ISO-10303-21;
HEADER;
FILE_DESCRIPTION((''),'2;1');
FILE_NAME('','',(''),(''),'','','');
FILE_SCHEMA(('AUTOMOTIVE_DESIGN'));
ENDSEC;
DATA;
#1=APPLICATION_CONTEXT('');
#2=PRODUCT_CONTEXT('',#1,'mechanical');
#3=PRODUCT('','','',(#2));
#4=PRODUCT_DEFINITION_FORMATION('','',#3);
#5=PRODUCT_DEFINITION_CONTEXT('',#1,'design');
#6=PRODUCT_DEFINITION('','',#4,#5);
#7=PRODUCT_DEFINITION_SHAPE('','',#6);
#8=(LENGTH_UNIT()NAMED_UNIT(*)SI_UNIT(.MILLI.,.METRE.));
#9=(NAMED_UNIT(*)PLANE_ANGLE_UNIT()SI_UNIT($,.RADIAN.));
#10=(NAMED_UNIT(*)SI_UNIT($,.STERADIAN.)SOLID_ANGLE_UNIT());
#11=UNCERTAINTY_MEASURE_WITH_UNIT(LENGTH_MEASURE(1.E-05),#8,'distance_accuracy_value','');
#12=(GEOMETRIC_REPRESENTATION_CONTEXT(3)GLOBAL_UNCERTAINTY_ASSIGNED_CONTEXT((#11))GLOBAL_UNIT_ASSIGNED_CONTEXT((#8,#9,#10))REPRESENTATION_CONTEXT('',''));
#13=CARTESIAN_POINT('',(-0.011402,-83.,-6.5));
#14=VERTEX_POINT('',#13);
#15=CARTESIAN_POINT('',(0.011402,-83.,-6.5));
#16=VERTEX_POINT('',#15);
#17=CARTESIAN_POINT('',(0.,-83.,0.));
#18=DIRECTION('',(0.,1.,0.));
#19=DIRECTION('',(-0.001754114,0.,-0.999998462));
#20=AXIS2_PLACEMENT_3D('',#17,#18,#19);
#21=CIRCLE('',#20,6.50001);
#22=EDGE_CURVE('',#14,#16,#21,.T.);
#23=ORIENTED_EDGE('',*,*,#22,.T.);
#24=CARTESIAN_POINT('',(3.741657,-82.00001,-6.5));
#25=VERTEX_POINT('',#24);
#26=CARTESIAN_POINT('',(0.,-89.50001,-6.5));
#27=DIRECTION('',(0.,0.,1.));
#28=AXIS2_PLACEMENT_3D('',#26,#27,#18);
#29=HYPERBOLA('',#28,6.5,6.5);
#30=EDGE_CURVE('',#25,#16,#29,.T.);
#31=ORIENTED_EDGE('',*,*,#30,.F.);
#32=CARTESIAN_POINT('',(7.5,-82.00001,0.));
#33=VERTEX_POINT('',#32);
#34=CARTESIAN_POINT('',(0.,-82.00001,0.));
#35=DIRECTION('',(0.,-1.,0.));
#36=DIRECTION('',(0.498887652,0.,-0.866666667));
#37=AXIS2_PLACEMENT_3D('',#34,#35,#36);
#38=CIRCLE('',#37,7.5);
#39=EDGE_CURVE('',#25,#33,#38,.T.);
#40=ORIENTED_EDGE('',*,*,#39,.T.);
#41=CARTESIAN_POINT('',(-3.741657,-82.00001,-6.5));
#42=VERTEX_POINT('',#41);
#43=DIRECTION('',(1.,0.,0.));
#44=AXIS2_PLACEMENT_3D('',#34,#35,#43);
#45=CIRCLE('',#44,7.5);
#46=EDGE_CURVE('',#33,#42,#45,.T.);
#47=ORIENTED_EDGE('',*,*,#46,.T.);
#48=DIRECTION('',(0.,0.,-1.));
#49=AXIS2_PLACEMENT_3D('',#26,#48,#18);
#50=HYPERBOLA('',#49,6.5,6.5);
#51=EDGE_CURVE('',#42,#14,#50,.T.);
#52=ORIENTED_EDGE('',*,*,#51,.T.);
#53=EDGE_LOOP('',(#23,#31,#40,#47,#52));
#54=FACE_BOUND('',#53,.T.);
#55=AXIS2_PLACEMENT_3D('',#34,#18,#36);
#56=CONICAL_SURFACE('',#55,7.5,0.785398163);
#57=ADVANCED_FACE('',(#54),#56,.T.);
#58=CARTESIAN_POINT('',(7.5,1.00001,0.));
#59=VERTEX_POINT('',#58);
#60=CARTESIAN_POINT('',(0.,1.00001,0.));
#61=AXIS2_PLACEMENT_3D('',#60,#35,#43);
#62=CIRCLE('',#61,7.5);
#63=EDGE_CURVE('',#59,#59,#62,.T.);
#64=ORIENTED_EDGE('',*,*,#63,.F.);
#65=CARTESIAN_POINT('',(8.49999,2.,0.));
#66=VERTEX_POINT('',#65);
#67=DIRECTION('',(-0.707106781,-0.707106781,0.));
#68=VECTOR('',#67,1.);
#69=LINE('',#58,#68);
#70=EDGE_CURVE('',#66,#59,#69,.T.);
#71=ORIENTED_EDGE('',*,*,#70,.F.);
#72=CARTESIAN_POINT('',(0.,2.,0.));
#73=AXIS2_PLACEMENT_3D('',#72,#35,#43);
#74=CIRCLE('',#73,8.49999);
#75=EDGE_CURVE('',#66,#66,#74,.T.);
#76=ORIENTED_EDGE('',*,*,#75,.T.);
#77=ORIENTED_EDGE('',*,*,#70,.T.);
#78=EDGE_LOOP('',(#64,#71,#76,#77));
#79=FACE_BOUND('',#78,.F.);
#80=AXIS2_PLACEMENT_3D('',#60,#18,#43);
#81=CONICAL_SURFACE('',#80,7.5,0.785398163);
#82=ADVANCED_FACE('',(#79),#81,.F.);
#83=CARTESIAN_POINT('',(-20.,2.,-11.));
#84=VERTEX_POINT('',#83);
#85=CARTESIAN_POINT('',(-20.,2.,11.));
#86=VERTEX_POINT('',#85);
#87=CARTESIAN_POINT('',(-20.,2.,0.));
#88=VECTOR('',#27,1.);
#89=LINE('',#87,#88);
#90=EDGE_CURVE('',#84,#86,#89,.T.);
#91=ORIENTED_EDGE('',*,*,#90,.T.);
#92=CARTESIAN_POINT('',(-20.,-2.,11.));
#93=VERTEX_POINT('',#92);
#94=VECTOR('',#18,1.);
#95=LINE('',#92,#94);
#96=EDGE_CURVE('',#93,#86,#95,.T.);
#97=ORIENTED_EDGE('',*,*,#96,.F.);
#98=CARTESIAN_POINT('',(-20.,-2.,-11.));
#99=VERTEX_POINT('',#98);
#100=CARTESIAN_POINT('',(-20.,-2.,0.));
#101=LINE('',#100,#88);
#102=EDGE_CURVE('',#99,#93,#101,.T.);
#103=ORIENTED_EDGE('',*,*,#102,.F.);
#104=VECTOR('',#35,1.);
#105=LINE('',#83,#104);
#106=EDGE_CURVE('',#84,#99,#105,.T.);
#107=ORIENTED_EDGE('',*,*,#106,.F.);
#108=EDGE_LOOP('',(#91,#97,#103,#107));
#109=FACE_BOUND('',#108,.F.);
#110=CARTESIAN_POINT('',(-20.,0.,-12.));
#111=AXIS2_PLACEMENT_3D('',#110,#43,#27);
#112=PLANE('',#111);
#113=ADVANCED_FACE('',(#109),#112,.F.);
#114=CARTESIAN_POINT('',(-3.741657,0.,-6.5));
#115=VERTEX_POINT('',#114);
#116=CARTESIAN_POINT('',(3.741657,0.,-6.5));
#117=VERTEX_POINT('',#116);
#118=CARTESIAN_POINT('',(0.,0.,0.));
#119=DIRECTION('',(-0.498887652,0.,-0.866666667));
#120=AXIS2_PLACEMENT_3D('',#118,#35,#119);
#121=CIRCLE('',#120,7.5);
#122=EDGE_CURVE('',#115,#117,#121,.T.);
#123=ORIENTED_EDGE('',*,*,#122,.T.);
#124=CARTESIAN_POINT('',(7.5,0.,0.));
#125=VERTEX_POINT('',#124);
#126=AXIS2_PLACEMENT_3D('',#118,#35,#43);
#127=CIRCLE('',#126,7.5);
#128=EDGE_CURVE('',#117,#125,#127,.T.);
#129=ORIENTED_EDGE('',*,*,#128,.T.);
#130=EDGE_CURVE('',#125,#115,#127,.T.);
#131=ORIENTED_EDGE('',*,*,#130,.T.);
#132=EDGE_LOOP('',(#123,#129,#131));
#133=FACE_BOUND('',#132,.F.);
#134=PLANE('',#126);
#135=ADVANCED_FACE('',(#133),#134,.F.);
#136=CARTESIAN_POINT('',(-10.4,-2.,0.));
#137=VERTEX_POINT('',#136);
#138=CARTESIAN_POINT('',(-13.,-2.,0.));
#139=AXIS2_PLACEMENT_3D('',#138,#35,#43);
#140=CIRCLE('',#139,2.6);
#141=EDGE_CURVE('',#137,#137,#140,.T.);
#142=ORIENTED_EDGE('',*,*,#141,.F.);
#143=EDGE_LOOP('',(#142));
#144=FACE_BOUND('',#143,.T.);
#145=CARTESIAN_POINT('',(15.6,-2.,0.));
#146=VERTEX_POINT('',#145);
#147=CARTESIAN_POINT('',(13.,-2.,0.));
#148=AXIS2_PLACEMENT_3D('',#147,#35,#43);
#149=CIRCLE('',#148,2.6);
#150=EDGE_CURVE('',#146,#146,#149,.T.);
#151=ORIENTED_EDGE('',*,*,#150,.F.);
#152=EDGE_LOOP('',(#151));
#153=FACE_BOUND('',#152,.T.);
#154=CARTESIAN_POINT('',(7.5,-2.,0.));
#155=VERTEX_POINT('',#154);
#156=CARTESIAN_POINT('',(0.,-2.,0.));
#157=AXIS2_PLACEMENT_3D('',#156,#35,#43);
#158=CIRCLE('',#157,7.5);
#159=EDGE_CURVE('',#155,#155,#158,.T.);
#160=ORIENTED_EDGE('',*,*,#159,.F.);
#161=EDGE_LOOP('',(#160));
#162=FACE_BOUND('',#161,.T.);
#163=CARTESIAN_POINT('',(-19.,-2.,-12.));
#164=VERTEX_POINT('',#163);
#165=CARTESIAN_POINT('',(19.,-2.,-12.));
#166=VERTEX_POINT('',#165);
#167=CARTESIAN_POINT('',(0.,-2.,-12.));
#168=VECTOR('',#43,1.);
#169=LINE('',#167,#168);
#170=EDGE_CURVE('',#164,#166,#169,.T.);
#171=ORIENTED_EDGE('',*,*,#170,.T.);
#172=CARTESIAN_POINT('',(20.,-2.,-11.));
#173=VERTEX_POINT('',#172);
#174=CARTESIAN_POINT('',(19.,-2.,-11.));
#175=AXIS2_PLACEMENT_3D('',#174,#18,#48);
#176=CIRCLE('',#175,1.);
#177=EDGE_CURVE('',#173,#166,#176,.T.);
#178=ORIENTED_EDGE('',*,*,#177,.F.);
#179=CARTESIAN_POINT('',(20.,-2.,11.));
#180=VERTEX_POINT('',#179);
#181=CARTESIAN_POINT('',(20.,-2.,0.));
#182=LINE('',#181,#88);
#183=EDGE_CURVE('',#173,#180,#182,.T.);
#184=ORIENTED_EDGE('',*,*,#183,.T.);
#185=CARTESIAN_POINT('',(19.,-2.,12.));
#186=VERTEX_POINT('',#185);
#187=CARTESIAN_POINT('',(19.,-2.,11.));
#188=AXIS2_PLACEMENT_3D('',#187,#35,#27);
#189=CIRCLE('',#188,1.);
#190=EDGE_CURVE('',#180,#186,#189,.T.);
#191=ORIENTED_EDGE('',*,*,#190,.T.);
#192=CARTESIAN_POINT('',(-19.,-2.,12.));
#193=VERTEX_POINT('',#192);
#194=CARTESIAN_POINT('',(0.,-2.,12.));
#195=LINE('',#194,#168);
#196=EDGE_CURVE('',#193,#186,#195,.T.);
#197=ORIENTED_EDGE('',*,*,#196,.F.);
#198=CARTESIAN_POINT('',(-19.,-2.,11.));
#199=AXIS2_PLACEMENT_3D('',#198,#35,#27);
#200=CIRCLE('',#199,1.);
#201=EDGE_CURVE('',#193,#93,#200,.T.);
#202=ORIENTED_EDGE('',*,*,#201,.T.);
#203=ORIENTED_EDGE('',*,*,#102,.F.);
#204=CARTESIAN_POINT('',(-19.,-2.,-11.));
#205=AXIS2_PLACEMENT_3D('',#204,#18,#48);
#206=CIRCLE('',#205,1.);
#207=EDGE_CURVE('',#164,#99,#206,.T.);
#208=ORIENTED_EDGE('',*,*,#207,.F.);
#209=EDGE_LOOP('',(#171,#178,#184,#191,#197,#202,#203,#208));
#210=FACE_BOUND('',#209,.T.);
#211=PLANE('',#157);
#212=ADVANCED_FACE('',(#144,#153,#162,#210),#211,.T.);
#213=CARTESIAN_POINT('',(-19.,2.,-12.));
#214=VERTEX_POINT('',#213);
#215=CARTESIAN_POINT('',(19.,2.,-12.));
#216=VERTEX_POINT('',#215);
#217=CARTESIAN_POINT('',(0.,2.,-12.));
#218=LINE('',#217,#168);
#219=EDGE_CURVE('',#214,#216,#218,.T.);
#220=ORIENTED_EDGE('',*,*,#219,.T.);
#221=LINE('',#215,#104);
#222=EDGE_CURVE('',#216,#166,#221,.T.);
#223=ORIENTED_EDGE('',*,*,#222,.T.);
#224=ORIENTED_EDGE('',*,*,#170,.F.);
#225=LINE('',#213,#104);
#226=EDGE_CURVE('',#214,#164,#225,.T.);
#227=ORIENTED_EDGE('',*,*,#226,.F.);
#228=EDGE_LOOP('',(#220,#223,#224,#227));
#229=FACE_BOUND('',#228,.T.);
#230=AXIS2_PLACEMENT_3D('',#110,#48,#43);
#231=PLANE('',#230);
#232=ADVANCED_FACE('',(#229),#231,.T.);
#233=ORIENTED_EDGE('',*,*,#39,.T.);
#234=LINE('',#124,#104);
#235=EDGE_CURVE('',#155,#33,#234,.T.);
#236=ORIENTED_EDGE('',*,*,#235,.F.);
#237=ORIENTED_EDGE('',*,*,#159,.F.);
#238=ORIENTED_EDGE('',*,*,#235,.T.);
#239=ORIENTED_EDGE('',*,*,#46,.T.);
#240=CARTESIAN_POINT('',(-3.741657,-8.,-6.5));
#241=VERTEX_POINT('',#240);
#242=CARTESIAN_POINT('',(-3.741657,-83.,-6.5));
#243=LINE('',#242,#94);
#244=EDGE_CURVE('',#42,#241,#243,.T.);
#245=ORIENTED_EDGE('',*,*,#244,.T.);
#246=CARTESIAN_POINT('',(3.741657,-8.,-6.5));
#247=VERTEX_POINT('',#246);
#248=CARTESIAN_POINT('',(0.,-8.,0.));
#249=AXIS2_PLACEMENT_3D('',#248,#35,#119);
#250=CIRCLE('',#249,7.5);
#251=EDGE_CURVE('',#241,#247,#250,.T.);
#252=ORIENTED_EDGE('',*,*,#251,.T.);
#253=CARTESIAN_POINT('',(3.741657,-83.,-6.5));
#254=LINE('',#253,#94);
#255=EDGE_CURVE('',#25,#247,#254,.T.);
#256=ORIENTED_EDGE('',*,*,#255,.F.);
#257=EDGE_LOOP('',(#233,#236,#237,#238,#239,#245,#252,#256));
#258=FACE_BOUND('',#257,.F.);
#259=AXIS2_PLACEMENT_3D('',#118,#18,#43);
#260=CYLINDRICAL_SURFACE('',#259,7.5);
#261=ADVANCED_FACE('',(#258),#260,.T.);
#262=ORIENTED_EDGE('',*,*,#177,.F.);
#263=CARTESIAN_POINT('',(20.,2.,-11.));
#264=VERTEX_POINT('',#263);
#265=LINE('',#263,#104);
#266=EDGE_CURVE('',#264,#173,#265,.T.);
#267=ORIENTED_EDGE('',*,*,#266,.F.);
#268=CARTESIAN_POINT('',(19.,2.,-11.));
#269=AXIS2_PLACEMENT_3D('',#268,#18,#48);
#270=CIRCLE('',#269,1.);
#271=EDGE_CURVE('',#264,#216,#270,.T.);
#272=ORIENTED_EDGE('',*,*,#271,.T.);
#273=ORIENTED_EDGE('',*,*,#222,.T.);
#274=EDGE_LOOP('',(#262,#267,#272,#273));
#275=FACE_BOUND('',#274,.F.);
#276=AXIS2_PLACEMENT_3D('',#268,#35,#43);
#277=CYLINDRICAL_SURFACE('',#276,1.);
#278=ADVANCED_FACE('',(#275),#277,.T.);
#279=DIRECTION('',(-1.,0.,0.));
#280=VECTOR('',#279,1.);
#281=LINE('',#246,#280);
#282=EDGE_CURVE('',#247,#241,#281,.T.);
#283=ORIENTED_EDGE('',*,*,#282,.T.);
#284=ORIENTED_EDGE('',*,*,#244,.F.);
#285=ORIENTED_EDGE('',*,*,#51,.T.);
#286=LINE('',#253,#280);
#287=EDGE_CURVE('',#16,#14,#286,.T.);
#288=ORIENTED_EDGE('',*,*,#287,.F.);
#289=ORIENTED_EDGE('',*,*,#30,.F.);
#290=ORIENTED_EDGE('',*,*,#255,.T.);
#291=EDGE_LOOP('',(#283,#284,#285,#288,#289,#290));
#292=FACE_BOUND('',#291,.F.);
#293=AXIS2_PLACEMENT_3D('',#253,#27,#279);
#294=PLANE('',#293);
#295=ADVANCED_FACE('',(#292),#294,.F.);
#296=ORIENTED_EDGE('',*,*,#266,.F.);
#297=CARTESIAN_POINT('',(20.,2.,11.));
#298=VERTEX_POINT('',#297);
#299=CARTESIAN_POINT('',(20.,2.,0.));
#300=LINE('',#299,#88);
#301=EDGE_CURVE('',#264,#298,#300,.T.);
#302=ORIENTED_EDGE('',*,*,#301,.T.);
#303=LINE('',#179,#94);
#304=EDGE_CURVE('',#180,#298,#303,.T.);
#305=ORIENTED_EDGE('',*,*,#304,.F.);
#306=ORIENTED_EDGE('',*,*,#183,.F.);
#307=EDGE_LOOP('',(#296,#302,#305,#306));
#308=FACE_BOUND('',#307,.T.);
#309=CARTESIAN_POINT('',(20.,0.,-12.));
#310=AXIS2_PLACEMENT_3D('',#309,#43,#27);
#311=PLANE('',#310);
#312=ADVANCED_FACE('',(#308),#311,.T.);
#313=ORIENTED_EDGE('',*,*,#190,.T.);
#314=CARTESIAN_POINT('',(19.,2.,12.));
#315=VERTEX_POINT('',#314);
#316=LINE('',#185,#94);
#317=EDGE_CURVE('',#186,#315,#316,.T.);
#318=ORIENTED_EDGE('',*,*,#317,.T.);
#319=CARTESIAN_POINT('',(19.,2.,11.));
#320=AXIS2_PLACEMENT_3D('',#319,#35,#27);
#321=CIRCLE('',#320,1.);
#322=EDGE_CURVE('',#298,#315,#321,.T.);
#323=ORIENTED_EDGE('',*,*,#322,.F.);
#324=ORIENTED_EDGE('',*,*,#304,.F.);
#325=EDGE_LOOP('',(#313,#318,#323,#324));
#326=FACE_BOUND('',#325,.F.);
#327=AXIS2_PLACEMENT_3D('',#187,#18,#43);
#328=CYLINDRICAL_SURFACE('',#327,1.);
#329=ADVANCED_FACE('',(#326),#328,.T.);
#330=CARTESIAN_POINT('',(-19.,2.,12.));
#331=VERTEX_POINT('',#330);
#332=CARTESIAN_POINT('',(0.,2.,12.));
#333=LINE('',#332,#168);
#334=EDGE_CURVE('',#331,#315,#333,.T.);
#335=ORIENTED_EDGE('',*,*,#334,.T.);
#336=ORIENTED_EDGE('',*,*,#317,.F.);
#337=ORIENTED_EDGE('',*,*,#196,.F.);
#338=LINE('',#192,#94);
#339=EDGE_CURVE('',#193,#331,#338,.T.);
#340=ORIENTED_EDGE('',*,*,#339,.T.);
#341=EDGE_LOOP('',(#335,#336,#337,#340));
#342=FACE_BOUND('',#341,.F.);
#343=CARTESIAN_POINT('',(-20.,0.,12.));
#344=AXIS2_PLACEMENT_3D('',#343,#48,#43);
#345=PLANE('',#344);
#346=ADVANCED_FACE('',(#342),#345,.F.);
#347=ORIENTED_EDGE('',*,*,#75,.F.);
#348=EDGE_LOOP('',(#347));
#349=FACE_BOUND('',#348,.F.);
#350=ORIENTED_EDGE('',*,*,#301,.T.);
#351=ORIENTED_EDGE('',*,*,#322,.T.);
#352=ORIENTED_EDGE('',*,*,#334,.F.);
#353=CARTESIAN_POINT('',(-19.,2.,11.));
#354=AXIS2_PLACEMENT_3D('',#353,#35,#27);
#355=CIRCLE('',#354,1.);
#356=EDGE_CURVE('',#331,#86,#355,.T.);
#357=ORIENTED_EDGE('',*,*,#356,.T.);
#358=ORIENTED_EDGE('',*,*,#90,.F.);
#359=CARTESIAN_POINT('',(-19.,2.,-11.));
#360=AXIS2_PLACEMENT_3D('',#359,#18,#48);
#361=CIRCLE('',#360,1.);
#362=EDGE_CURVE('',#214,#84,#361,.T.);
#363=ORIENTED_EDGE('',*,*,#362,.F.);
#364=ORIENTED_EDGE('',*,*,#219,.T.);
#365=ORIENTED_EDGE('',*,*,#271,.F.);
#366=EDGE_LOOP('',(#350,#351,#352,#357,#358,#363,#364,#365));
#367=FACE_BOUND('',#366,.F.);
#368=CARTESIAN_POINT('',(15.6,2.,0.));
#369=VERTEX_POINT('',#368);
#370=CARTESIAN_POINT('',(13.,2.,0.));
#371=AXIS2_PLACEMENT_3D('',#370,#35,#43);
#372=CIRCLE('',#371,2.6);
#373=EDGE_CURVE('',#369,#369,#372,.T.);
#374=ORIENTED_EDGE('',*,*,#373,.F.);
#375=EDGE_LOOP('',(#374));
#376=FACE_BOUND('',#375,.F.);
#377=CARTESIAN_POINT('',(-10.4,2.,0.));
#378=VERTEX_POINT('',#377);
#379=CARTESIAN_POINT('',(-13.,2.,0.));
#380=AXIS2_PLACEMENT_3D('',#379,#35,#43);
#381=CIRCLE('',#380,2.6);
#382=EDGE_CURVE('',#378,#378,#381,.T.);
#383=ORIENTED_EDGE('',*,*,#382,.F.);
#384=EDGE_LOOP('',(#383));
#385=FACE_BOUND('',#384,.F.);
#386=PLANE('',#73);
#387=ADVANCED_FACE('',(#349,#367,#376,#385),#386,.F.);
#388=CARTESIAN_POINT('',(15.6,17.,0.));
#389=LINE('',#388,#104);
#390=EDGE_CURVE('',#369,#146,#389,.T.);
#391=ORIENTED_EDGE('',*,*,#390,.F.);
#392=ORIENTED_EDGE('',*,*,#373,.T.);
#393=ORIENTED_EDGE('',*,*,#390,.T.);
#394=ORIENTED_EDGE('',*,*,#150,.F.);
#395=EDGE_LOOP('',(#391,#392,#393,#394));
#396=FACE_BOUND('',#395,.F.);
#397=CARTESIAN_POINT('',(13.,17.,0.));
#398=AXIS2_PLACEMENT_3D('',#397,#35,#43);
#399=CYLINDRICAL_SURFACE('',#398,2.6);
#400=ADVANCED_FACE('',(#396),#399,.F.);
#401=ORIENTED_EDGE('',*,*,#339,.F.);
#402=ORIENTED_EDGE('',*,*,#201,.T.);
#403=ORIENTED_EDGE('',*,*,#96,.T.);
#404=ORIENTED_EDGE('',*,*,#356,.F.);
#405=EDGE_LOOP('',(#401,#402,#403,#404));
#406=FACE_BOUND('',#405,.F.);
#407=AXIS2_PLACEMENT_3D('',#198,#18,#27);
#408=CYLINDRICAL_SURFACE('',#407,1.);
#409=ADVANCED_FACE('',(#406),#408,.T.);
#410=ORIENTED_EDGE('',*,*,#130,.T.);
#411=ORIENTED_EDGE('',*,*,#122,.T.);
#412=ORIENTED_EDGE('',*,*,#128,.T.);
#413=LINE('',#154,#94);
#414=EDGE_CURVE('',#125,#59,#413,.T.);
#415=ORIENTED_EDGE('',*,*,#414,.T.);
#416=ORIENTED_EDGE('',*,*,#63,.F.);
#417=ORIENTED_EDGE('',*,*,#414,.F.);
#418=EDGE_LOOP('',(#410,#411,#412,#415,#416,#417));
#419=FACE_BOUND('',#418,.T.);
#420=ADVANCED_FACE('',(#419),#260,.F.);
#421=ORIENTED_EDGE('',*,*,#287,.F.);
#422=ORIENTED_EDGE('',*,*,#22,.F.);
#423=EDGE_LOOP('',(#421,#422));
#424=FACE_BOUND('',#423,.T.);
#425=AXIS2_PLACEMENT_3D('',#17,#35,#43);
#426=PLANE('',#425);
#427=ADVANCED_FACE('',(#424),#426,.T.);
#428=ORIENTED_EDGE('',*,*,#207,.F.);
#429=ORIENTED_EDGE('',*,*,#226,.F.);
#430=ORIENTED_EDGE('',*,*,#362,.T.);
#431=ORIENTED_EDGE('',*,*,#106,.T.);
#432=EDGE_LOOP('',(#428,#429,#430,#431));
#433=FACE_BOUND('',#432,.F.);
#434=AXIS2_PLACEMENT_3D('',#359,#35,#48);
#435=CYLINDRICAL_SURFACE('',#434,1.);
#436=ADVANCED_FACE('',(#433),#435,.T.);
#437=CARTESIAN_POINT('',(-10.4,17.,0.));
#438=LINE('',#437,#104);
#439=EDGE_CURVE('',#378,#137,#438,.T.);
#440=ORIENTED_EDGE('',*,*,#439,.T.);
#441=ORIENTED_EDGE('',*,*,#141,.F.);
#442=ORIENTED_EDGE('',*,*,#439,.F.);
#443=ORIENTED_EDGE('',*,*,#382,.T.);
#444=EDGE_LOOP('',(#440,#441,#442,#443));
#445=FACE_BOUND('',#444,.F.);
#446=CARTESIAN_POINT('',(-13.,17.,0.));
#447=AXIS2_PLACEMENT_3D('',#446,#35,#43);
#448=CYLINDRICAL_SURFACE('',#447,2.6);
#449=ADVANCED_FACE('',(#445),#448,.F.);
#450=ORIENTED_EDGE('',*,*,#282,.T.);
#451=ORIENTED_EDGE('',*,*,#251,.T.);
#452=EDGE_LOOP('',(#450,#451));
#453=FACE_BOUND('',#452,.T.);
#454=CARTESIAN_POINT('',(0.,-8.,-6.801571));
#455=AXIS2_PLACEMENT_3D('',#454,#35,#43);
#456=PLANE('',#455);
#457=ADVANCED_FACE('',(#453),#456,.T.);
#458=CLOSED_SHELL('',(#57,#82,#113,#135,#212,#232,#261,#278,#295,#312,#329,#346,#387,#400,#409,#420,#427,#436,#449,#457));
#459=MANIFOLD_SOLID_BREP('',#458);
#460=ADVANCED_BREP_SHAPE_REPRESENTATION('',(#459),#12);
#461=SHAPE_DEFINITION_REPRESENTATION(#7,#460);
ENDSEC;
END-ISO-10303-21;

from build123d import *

# Parameters (mm, degrees)
F0_W     = 40
F0_H     = 24
F0_R     = 7.5
F1_DEPTH = 2
F2_DEPTH = 83
F4_D     = 5.2
F4_DEPTH = 15
F4_TIP   = 1.5622376095
F6_DEPTH = 75
F8_DEPTH = 75
F9_SIZE  = 0.99999
F10_R    = 1


# Not quite as in the source:
# - a fillet or chamfer is up to 0.001 mm smaller than in the source, because OpenCascade refuses the exact size


with BuildPart() as f1:
    # F0 (on Front) → F1 (new body, symmetric)
    with BuildSketch(Plane.XZ):
        Rectangle(F0_W, F0_H)
        Circle(F0_R, mode=Mode.SUBTRACT)
    extrude(amount=F1_DEPTH, both=True)

    # F0 (on Front) → F2 (join)
    with BuildSketch(Plane.XZ):
        Circle(F0_R)
    extrude(amount=F2_DEPTH)

    # F4
    with Locations(Plane(origin=(0, 2, 0), x_dir=(-1, 0, 0), z_dir=(0, 1, 0))):
        with Locations((-13, 0), (13, 0)):
            Hole(F4_D / 2, depth=F4_DEPTH)
            with Locations((0, 0, -(F4_DEPTH + F4_TIP / 2))):  # 118° drill point
                Cone(0, F4_D / 2, F4_TIP, mode=Mode.SUBTRACT)

    # F5 (on Front) → F6 (cut)
    with BuildSketch(Plane.XZ):
        with BuildLine():
            Line((3.7416573868, -6.5), (-3.7416573868, -6.5))
            ThreePointArc((-3.7416573868, -6.5), (0, -7.5), (3.7416573868, -6.5))
        make_face()
    extrude(amount=-F6_DEPTH, mode=Mode.SUBTRACT)

    # F7 (on face) → F8 (cut)
    with BuildSketch(Plane.XZ.offset(83)):
        with BuildLine():
            ThreePointArc((-3.7416573868, -6.5), (0, -7.5), (3.7416573868, -6.5))
            Line((3.7416573868, -6.5), (-3.7416573868, -6.5))
        make_face()
    extrude(amount=-F8_DEPTH, mode=Mode.SUBTRACT)

    # F9 (size 1 in the source; OpenCascade refuses exactly that, so slightly less here)
    f9_edges = [f1.edges().sort_by_distance(p)[0] for p in [
        (-7.5, 2, 0),
        (-3.754169, -83, 6.492782),
    ]]
    chamfer(f9_edges, length=F9_SIZE)

    # F10
    f10_edges = [f1.edges().sort_by_distance(p)[0] for p in [
        (20, 0, 12),
        (-20, 0, 12),
        (20, 0, -12),
        (-20, 0, -12),
    ]]
    fillet(f10_edges, radius=F10_R)


solid = f1.part
